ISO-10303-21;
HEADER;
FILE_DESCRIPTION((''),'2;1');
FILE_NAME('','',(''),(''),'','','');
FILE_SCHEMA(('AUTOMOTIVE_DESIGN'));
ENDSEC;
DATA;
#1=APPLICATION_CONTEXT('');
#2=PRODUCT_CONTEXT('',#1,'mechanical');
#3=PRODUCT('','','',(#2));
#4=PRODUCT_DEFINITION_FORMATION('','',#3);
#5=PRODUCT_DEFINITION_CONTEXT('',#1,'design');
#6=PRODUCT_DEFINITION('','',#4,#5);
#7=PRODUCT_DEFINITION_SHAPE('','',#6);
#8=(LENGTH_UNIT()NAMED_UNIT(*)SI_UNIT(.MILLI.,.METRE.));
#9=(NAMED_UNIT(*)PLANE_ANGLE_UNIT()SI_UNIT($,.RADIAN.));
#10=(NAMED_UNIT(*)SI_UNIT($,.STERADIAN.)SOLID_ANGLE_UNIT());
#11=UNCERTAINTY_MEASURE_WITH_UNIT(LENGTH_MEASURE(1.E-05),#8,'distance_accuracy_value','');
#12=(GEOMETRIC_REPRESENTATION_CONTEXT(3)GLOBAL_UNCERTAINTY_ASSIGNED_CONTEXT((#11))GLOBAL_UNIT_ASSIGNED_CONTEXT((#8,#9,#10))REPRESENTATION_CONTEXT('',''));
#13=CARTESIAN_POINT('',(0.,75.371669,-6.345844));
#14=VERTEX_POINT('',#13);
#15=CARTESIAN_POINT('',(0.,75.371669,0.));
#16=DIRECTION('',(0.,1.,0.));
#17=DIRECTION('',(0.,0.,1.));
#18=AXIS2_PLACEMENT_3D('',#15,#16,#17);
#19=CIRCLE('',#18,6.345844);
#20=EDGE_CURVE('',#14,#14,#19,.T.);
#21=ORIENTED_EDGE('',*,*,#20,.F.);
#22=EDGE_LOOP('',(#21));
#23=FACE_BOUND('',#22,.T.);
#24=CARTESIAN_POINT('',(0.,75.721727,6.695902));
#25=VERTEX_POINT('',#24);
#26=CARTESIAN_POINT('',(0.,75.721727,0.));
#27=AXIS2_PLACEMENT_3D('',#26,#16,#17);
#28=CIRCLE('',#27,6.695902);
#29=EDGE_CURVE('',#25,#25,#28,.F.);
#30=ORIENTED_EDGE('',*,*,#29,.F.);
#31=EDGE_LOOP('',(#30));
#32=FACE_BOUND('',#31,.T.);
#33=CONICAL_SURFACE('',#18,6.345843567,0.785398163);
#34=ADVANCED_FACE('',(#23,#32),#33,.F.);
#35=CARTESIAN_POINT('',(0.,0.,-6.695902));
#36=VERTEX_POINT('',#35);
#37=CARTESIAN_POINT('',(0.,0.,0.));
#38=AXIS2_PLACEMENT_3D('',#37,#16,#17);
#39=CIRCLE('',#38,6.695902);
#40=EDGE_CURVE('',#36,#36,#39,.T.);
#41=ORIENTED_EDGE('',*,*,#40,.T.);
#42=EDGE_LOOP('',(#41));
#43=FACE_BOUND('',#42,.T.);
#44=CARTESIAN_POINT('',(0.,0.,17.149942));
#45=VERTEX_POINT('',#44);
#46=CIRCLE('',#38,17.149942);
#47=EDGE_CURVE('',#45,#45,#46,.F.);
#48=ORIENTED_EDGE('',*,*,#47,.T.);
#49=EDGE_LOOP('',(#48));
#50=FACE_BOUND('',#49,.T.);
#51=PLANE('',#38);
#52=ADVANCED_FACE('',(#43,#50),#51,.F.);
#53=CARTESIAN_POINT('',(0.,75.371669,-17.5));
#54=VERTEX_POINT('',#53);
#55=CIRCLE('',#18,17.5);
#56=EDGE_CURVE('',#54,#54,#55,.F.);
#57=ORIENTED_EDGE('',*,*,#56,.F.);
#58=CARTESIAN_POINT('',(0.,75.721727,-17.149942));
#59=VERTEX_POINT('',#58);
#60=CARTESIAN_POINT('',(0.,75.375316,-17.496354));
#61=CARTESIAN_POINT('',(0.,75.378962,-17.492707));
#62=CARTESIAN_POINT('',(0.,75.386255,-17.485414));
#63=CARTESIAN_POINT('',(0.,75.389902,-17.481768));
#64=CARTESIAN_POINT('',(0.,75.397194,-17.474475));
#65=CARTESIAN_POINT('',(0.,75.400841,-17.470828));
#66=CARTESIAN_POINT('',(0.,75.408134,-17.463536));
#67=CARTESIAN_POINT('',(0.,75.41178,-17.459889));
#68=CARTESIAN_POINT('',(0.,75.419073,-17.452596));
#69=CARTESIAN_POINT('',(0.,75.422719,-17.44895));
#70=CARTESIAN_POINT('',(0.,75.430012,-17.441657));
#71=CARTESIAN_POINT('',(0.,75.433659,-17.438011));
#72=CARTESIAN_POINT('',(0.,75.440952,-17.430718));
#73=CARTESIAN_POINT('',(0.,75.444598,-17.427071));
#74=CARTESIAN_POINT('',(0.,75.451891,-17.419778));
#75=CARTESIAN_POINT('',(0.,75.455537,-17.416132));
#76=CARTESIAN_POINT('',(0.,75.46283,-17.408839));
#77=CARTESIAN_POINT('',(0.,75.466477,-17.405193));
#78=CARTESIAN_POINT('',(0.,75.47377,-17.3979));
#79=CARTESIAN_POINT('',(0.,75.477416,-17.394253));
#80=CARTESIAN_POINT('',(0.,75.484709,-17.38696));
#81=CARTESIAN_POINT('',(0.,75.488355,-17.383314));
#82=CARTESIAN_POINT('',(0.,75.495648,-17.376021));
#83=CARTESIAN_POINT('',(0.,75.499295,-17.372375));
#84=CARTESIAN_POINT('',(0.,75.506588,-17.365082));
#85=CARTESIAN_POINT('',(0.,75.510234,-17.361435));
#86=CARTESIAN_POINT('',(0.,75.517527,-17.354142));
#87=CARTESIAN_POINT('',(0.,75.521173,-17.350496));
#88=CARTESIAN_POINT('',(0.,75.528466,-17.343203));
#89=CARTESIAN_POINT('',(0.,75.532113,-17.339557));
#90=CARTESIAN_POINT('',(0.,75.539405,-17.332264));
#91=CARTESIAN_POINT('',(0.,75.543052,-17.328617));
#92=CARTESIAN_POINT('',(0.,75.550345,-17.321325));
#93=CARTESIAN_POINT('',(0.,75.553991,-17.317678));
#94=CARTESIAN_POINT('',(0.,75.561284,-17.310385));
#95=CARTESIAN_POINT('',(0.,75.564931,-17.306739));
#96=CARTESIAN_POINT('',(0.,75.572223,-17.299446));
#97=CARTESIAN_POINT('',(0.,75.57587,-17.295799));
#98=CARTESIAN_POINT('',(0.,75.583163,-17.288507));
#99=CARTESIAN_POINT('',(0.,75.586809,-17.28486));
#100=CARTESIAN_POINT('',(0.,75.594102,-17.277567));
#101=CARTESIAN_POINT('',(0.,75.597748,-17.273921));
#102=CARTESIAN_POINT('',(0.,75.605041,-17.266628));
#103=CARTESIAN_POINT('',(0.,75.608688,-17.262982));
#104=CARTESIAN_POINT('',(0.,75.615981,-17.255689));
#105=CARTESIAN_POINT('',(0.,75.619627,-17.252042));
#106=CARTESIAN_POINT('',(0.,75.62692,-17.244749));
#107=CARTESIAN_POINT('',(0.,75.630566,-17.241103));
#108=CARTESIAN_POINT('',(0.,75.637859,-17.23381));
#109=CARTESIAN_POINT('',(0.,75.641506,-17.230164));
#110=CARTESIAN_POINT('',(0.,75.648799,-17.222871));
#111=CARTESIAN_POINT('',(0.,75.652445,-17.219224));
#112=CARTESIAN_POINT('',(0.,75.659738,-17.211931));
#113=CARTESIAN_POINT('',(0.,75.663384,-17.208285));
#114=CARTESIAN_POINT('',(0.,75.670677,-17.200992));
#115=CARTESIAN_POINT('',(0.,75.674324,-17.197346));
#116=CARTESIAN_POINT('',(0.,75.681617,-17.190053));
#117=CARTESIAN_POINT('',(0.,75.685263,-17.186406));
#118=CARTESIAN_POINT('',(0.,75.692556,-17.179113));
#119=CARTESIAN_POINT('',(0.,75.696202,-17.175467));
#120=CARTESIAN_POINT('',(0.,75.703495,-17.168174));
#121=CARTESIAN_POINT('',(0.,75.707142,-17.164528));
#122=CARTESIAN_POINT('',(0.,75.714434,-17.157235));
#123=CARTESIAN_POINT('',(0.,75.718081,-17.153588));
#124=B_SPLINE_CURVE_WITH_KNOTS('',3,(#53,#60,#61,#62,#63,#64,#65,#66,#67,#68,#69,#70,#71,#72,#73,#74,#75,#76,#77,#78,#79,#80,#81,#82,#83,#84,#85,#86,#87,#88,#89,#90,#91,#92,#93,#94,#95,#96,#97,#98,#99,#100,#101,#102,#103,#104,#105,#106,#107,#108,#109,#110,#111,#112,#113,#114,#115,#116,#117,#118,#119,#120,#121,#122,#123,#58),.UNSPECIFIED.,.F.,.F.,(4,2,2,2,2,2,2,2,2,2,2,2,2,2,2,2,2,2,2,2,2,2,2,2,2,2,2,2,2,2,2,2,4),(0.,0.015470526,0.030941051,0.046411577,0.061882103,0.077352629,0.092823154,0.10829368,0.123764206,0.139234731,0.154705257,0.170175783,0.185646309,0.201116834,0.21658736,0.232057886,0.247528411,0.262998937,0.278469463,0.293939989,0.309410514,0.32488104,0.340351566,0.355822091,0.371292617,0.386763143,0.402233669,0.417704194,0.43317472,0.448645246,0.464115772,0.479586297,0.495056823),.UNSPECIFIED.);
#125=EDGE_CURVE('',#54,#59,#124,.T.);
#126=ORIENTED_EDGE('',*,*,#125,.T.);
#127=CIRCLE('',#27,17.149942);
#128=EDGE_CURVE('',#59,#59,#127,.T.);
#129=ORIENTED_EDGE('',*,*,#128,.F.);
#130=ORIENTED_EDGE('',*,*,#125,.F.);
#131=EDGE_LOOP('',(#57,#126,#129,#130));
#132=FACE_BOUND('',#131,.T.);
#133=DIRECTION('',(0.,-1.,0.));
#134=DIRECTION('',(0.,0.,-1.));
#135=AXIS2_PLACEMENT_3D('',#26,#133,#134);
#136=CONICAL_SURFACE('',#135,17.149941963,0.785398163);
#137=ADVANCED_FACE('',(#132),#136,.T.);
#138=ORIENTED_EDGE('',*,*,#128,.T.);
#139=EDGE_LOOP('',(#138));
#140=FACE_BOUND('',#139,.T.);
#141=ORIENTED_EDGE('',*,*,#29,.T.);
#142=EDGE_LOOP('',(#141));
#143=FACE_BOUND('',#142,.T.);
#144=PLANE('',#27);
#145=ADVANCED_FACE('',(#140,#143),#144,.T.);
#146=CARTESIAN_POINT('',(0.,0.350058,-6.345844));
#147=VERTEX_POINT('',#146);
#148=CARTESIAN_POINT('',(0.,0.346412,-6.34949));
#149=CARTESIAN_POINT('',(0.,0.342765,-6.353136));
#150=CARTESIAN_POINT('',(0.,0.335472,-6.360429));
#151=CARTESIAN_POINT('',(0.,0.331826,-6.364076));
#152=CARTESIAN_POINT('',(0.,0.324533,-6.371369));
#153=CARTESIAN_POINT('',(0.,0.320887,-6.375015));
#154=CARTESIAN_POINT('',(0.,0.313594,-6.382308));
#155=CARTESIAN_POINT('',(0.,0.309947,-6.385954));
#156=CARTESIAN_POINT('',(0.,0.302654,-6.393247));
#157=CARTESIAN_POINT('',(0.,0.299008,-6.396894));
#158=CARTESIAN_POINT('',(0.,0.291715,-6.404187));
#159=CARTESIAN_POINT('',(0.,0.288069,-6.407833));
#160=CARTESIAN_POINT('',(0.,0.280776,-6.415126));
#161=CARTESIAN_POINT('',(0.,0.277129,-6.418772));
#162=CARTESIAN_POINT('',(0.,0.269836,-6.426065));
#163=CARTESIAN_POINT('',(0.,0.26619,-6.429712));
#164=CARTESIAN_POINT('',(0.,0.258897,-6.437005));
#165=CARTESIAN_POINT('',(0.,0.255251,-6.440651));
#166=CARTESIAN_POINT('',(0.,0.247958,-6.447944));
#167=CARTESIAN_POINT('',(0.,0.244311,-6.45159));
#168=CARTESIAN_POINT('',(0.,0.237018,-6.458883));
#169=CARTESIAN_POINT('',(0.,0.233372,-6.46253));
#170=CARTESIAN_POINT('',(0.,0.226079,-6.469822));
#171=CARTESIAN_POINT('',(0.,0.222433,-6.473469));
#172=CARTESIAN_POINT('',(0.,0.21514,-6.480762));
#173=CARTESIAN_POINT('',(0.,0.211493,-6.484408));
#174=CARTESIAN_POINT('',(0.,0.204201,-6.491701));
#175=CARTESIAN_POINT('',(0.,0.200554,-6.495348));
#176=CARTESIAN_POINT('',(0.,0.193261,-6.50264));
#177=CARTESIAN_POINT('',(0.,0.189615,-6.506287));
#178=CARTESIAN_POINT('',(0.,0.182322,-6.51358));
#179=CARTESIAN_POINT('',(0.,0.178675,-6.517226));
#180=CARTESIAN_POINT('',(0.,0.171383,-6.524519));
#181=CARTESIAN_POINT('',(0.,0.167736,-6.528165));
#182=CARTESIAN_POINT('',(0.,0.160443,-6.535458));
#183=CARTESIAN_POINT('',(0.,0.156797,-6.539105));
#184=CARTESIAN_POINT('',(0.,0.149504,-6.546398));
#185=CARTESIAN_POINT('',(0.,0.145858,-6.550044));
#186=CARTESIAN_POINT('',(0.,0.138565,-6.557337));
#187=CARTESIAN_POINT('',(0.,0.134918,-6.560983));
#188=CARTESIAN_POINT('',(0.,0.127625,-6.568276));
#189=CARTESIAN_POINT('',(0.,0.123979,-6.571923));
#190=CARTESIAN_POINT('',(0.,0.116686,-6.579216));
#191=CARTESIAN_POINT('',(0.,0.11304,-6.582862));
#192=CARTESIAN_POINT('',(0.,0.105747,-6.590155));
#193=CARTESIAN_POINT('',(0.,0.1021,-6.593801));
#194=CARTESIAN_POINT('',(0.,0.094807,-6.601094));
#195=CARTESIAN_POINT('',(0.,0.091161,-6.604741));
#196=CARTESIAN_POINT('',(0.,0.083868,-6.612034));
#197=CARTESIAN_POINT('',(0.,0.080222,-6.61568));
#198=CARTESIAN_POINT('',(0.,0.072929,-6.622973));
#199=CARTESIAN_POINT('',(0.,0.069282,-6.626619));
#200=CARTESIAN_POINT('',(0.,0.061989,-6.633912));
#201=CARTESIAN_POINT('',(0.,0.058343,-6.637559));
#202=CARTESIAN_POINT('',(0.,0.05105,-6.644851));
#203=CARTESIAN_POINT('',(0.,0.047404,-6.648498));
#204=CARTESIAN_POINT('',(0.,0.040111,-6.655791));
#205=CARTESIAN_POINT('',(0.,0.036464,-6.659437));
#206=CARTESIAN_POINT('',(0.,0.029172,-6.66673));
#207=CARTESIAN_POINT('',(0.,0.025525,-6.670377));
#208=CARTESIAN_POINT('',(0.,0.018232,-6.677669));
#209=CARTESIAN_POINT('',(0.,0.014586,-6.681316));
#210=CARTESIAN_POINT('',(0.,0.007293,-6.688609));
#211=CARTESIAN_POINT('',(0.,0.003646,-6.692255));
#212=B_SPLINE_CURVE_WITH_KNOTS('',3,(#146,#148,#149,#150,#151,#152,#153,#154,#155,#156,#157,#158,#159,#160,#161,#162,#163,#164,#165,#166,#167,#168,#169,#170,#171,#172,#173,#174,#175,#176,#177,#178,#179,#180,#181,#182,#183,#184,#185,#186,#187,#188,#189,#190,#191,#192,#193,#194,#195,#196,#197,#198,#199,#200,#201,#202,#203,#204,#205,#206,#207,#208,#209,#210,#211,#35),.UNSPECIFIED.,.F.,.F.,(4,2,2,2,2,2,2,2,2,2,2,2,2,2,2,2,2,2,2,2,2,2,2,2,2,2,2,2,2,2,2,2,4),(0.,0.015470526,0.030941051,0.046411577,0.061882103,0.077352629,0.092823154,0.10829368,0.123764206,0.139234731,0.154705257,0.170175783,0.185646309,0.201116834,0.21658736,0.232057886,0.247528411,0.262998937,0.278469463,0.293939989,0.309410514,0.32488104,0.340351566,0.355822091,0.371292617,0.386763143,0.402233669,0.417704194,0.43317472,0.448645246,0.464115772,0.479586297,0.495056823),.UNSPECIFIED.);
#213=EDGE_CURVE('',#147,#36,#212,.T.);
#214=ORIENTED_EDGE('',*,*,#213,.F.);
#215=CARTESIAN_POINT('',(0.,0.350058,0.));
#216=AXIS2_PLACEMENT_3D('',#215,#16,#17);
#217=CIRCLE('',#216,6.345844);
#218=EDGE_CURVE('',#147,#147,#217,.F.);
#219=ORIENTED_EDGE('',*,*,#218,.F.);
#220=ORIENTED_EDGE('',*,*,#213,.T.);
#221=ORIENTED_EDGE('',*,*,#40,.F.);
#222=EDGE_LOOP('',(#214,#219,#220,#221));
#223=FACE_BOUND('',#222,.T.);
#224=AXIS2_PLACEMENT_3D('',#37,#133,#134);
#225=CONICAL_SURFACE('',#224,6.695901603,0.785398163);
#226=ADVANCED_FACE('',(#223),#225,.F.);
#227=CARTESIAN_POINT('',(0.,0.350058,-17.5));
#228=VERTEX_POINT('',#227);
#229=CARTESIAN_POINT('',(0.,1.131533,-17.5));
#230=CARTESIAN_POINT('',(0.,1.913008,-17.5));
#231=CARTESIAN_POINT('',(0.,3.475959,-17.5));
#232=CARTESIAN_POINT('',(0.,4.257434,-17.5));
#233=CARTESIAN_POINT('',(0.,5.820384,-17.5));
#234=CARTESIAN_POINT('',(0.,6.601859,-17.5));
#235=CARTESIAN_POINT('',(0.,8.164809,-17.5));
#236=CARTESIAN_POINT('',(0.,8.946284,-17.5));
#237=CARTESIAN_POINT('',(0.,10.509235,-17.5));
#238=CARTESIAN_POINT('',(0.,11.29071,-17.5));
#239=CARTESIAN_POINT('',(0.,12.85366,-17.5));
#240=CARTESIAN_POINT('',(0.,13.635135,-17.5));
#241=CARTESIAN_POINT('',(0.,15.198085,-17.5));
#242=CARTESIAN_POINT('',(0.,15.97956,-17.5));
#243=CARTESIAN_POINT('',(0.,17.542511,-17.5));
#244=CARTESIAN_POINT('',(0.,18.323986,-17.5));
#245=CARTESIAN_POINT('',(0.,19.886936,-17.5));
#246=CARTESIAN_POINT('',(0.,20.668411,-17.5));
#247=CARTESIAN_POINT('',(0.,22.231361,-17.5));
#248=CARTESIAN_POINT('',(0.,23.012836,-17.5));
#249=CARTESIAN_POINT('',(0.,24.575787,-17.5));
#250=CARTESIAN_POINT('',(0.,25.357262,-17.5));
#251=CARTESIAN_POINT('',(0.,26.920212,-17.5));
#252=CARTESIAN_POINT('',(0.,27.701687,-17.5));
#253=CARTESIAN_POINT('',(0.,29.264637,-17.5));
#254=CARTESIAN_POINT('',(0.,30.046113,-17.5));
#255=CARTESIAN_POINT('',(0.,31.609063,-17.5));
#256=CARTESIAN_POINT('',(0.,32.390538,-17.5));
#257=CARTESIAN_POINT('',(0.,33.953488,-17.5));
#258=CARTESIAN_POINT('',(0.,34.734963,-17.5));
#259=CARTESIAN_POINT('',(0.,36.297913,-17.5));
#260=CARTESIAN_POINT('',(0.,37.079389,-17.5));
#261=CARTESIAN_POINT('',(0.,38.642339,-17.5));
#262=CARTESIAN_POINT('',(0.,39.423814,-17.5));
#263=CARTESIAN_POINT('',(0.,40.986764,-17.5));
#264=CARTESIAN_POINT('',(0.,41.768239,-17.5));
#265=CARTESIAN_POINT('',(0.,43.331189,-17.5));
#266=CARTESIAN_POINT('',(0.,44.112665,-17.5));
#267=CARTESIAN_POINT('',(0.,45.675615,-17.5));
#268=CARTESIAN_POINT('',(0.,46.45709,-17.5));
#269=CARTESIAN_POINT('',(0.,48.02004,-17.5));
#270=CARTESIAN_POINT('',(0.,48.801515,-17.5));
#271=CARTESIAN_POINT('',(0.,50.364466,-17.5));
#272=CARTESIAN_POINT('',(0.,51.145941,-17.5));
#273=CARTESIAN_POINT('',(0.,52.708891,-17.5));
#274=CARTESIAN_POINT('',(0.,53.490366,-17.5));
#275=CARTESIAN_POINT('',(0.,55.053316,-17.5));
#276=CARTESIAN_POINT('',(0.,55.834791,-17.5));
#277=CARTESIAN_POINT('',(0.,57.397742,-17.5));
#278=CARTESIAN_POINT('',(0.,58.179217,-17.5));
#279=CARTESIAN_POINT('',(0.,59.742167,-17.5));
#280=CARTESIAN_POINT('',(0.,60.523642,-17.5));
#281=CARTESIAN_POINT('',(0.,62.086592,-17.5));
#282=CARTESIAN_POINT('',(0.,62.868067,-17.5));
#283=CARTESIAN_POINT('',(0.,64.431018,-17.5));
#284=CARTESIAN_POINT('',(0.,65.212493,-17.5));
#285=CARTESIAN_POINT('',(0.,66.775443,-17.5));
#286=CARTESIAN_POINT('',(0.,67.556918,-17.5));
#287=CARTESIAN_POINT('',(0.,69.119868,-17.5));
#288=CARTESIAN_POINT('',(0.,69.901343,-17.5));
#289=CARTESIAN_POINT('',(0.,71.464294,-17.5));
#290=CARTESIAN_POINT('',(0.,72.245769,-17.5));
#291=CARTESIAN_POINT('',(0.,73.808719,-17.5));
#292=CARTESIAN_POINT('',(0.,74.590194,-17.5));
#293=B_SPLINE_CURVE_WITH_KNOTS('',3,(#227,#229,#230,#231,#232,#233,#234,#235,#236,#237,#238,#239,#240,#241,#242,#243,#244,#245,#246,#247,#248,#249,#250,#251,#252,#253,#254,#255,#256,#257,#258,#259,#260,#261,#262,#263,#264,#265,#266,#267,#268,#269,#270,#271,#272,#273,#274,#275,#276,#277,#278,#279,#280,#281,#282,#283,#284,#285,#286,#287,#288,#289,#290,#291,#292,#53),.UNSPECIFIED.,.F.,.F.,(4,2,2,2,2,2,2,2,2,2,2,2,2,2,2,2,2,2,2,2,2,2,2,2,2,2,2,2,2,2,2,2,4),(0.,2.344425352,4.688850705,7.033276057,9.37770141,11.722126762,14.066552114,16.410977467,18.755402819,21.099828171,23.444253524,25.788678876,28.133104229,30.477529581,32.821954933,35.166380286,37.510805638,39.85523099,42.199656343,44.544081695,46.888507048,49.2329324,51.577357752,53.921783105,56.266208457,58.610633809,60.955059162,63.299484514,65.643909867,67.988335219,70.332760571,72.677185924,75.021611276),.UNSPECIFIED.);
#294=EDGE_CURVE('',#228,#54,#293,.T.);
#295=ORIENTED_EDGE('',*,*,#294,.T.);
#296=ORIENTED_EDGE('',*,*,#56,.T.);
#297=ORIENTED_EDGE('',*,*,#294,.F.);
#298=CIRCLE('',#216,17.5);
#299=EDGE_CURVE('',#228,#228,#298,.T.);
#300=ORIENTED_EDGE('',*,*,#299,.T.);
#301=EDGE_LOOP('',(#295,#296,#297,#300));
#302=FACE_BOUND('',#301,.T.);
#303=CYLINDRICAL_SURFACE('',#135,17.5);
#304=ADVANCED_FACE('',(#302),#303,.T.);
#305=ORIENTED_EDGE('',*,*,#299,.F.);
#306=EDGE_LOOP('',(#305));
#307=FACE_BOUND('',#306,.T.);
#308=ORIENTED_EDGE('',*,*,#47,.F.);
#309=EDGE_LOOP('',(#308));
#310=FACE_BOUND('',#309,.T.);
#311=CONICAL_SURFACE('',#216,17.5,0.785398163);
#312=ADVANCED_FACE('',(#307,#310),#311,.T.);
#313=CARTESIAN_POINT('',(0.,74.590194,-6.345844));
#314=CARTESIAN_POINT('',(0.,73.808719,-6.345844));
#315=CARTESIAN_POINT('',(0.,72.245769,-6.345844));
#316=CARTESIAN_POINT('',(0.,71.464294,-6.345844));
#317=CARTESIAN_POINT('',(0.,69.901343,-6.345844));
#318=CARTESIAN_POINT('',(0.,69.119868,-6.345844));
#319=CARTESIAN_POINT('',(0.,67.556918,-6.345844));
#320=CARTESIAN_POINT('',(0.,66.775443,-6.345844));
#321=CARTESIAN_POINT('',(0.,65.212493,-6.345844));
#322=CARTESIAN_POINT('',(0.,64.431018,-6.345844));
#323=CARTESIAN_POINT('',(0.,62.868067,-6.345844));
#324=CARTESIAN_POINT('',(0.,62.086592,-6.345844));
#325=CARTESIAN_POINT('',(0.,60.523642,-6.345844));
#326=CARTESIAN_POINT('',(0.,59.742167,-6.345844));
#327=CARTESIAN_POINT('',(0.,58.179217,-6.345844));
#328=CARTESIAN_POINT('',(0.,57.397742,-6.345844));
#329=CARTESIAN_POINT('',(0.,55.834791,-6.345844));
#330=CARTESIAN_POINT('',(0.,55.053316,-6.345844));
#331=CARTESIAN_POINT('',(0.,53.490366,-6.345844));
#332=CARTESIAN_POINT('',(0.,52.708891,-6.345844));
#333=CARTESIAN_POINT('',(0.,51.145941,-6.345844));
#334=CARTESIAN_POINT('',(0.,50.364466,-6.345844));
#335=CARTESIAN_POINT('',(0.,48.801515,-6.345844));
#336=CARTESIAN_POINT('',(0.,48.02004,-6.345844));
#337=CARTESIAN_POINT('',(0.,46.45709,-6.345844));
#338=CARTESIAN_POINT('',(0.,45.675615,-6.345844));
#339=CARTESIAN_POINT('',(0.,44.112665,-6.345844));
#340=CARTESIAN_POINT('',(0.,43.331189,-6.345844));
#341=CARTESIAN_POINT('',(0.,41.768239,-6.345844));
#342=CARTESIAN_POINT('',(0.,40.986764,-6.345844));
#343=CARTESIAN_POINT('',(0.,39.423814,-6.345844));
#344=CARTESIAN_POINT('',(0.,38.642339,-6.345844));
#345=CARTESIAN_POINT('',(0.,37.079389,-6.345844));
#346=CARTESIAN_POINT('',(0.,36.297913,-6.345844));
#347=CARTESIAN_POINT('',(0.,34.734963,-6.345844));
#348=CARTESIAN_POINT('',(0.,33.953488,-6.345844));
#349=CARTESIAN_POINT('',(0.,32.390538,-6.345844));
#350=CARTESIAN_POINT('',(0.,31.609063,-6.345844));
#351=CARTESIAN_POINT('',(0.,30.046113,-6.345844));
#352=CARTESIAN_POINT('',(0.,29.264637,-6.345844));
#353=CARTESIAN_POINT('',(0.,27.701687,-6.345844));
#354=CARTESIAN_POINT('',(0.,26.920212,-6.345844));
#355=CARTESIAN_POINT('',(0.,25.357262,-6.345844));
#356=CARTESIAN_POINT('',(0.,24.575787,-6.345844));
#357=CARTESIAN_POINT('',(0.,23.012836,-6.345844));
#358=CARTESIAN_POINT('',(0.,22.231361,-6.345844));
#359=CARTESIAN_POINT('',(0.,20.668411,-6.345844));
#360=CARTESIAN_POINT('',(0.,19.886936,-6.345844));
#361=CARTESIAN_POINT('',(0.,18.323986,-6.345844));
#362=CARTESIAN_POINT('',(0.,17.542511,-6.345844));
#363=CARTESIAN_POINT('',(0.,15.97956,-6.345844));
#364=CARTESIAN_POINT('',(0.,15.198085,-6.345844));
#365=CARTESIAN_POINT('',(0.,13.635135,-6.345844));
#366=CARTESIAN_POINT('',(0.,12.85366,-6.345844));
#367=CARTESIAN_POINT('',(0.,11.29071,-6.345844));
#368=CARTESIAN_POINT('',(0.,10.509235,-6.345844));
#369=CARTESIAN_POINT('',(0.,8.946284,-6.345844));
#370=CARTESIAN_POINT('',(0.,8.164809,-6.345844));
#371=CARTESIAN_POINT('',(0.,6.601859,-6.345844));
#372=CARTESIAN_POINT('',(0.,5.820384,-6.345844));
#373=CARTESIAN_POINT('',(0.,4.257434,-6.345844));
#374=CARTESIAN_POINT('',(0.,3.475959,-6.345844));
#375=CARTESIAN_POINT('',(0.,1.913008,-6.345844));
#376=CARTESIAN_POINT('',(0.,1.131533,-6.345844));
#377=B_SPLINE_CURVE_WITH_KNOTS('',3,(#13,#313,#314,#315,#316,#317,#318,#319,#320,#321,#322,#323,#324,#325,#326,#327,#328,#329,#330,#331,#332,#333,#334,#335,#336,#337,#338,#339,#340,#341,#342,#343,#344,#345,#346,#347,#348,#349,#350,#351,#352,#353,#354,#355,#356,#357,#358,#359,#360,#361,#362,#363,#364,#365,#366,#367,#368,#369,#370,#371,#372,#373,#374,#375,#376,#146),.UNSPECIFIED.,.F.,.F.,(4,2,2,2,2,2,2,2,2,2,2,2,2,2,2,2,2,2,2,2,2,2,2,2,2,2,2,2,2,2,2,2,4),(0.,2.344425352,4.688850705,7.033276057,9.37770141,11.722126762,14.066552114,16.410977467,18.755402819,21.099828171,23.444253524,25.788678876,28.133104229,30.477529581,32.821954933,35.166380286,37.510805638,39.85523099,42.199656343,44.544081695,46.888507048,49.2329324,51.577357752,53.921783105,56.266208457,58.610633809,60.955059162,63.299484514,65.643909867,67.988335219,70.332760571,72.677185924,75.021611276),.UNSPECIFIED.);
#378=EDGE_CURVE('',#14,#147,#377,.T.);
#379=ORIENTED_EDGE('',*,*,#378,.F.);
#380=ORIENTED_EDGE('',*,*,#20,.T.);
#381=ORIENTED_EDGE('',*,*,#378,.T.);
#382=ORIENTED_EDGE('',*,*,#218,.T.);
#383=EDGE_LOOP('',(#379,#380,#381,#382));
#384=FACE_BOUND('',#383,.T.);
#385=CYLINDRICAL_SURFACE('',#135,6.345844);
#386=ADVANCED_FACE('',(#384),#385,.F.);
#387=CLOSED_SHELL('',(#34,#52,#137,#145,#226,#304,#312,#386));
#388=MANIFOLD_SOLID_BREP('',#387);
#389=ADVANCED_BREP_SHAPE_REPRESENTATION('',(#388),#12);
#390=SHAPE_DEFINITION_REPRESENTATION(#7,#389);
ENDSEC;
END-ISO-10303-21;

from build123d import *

# Parameters (mm, degrees)
SKETCH1_R           = 17.5
BOSS_EXTRUDE1_DEPTH = 75.721727349
SKETCH2_R           = 6.345843567
CUT_EXTRUDE1_DEPTH  = 80.663542432
CHAMFER1_SIZE       = 0.350058037


with BuildPart() as part:
    # Sketch1 → Boss-Extrude1 (new body)
    with BuildSketch(Plane(origin=(0, 0, 0), x_dir=(1, 0, 0), z_dir=(0, 1, 0))):
        Circle(SKETCH1_R)
    extrude(amount=BOSS_EXTRUDE1_DEPTH)

    # Sketch2 → Cut-Extrude1 (cut, through all)
    with BuildSketch(Plane(origin=(0, 0, 0), x_dir=(1, 0, 0), z_dir=(0, 1, 0))):
        Circle(SKETCH2_R)
    extrude(amount=CUT_EXTRUDE1_DEPTH, mode=Mode.SUBTRACT)

    # Chamfer1
    chamfer1_edges = [part.edges().sort_by_distance(p)[0] for p in [
        (-6.345843567, 75.721727349, 0),
        (-6.345843567, 0, 0),
        (-17.5, 0, 0),
        (-17.5, 75.721727349, 0),
    ]]
    chamfer(chamfer1_edges, length=CHAMFER1_SIZE)


solid = part.part
